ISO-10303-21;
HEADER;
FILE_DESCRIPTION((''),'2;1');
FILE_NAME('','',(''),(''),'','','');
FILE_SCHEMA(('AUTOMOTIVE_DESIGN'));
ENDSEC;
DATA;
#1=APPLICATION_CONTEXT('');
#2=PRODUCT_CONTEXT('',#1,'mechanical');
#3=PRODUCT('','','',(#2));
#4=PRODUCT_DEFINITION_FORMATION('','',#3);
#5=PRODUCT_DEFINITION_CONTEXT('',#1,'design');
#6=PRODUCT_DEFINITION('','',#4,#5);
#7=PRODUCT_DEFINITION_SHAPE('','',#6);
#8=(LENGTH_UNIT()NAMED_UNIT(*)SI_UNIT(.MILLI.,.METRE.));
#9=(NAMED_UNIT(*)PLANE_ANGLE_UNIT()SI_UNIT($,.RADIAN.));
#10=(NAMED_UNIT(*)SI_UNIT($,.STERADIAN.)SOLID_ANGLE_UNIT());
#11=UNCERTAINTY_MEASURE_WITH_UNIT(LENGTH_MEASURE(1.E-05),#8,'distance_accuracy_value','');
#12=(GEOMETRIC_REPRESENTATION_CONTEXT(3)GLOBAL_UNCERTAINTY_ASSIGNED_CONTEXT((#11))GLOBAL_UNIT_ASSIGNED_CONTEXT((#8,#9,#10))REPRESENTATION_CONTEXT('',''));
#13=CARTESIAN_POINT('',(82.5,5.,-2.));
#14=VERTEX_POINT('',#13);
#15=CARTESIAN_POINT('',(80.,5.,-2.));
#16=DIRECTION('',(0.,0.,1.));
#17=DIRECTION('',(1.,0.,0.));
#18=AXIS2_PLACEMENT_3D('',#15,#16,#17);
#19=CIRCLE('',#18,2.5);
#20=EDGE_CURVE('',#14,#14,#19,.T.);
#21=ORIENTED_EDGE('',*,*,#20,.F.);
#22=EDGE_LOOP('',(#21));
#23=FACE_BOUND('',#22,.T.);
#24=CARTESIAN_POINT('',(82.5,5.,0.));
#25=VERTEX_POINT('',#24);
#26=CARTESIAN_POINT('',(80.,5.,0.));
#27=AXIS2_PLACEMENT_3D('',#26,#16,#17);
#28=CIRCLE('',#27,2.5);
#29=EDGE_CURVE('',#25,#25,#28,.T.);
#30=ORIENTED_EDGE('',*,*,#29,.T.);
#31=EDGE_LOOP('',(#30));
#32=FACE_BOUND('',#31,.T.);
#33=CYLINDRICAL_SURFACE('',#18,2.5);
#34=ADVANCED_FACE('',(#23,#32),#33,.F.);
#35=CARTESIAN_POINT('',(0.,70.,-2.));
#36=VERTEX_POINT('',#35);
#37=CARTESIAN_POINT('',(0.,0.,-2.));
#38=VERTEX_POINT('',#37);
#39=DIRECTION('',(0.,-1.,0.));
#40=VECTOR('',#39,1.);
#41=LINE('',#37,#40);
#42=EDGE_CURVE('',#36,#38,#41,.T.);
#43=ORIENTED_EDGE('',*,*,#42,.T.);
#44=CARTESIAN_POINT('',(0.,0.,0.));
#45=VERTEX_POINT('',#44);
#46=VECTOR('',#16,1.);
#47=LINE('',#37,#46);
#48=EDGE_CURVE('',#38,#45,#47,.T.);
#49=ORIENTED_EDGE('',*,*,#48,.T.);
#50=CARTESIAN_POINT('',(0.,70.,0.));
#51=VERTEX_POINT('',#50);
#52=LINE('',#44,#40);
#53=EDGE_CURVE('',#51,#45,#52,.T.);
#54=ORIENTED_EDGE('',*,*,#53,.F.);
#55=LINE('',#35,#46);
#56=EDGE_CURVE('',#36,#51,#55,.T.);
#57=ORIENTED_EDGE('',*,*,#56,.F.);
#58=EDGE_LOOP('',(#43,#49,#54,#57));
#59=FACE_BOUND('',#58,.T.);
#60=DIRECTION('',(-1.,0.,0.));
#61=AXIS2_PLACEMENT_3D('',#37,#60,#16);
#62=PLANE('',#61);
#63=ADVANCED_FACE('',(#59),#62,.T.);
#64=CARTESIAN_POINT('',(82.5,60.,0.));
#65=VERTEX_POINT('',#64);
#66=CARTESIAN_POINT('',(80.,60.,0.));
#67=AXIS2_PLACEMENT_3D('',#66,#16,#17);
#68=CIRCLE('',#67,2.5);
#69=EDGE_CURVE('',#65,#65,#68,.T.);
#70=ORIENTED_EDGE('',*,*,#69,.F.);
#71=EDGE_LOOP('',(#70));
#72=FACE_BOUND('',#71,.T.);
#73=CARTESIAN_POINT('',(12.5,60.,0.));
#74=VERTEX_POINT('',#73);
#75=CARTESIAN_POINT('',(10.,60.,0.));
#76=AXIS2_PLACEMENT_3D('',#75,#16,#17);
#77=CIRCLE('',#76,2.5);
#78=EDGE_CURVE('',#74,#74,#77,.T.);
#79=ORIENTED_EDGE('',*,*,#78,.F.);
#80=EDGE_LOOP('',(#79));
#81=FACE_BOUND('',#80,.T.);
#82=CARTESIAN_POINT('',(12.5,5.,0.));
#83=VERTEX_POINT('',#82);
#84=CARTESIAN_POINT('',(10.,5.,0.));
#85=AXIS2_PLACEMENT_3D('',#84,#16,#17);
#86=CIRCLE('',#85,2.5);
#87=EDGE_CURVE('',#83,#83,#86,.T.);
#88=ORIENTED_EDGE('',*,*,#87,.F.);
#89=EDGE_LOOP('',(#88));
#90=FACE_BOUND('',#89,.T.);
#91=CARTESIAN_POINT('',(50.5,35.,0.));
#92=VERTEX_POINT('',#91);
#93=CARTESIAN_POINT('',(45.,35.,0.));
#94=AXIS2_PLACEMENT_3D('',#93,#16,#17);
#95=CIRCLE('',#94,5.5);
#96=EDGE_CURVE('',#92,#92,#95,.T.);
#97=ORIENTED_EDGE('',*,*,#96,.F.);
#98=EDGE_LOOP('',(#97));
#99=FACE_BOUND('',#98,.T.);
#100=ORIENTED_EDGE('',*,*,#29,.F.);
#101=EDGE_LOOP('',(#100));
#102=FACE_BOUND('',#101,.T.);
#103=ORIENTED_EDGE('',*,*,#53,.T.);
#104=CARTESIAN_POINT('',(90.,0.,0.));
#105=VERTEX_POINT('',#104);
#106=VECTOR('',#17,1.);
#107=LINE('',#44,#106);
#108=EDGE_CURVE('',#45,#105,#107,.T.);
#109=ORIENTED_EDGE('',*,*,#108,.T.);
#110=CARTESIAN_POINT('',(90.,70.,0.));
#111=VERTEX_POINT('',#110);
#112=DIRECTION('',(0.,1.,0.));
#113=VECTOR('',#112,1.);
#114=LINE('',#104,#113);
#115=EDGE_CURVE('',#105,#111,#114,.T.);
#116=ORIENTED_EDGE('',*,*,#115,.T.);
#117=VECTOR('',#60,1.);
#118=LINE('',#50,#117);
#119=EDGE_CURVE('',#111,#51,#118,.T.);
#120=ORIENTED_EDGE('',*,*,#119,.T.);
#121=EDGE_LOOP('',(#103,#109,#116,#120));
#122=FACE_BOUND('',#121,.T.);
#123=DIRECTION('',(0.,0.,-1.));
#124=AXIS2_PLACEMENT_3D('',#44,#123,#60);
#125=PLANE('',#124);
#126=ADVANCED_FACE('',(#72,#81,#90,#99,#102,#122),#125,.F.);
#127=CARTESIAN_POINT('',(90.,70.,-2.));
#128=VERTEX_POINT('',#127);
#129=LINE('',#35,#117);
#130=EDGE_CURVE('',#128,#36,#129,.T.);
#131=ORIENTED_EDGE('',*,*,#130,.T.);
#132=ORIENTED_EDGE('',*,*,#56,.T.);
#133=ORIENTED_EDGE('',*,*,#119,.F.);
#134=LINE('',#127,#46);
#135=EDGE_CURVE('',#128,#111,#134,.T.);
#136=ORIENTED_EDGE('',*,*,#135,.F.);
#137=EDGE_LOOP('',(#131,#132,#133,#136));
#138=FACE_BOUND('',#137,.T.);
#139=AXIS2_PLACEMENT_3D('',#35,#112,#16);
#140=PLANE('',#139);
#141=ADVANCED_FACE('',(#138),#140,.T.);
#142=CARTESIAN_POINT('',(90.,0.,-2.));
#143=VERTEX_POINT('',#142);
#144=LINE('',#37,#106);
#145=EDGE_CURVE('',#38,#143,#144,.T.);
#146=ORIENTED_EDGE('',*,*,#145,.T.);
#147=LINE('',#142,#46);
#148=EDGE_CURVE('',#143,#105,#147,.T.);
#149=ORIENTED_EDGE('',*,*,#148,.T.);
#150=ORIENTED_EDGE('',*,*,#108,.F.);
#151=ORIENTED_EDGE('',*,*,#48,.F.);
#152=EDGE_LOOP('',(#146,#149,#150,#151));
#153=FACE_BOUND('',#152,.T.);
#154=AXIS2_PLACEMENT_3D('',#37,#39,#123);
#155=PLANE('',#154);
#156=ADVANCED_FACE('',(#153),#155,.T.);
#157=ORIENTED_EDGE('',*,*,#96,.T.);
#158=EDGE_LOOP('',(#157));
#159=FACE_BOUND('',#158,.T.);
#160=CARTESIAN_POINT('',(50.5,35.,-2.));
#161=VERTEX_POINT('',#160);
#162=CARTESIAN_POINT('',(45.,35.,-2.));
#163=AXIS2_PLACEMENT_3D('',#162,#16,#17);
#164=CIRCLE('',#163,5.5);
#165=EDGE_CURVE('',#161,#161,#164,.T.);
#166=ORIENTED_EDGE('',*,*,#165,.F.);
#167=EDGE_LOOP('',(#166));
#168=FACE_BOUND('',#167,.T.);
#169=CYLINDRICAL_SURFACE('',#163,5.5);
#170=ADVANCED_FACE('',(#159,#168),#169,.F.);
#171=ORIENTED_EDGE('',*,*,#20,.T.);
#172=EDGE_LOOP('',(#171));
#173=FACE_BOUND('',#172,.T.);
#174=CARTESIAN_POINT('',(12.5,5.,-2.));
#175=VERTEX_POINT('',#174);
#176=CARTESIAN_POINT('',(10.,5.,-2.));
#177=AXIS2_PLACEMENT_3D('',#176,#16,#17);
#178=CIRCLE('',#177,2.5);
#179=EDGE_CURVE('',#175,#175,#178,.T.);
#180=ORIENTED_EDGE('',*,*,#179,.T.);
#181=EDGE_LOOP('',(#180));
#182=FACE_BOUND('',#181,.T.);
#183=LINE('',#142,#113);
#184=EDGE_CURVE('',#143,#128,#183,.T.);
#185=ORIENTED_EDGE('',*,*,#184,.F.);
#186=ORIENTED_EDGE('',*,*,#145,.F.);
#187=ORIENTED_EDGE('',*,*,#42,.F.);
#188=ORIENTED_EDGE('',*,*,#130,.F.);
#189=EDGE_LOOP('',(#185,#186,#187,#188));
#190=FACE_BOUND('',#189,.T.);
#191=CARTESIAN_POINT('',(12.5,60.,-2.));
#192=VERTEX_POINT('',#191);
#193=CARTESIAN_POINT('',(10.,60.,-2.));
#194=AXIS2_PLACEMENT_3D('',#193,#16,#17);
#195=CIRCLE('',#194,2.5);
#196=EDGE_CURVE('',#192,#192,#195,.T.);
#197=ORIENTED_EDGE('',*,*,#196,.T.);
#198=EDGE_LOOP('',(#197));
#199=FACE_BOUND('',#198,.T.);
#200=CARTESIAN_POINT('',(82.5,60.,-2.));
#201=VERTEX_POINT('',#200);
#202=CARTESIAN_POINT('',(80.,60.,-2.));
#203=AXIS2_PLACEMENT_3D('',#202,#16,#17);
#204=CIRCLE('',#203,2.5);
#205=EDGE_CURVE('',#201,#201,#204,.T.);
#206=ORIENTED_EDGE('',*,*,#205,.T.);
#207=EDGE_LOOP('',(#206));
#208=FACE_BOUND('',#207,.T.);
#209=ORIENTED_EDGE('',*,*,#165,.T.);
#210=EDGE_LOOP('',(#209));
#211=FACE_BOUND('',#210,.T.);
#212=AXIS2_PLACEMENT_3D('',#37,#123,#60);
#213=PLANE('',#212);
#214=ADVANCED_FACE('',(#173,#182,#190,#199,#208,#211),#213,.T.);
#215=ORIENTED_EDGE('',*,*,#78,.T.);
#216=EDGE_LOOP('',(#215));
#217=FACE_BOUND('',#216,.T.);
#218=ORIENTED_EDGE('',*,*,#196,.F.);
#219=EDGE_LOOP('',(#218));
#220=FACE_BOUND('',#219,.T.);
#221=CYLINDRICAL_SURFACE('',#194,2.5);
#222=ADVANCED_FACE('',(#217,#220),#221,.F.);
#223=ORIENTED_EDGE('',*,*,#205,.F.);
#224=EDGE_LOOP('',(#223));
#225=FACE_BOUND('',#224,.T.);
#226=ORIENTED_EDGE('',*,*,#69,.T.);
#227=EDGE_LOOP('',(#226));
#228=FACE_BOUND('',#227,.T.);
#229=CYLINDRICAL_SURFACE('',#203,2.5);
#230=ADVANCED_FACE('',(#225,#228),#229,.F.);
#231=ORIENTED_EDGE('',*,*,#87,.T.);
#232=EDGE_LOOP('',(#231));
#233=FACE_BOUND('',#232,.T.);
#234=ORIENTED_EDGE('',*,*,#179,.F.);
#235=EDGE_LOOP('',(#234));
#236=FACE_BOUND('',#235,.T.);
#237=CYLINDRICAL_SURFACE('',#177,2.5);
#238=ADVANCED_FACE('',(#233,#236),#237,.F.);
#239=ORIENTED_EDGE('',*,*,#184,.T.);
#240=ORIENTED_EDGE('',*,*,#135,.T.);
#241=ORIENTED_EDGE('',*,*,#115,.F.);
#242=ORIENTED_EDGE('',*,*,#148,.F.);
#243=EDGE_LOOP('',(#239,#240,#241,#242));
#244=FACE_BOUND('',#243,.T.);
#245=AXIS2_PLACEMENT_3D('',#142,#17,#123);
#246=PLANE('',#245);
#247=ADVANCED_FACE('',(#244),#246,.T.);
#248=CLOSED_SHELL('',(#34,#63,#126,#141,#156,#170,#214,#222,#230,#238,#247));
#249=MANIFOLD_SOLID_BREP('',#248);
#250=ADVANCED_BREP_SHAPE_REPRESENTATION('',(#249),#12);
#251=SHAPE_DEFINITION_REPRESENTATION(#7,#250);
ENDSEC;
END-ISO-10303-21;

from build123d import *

# Parameters (mm, degrees)
SKETCH_1_W             = 90
SKETCH_1_H             = 70
SKETCH_1_R             = 5.5
SKETCH_1_R_2           = 2.5
SM_BASE_FLANGE_1_DEPTH = 2


# Sheet-metal steps are written as plain solids
with BuildPart() as part:
    # Sketch 1 → Базовая кромка1 (new body)
    with BuildSketch(Plane.XY):
        with Locations((45, 35)):
            Rectangle(SKETCH_1_W, SKETCH_1_H)
        with Locations((45, 35)):
            Circle(SKETCH_1_R, mode=Mode.SUBTRACT)
        with Locations((10, 60)):
            Circle(SKETCH_1_R_2, mode=Mode.SUBTRACT)
        with Locations((80, 60)):
            Circle(SKETCH_1_R_2, mode=Mode.SUBTRACT)
        with Locations((10, 5)):
            Circle(SKETCH_1_R_2, mode=Mode.SUBTRACT)
        with Locations((80, 5)):
            Circle(SKETCH_1_R_2, mode=Mode.SUBTRACT)
    extrude(amount=-SM_BASE_FLANGE_1_DEPTH)


solid = part.part
